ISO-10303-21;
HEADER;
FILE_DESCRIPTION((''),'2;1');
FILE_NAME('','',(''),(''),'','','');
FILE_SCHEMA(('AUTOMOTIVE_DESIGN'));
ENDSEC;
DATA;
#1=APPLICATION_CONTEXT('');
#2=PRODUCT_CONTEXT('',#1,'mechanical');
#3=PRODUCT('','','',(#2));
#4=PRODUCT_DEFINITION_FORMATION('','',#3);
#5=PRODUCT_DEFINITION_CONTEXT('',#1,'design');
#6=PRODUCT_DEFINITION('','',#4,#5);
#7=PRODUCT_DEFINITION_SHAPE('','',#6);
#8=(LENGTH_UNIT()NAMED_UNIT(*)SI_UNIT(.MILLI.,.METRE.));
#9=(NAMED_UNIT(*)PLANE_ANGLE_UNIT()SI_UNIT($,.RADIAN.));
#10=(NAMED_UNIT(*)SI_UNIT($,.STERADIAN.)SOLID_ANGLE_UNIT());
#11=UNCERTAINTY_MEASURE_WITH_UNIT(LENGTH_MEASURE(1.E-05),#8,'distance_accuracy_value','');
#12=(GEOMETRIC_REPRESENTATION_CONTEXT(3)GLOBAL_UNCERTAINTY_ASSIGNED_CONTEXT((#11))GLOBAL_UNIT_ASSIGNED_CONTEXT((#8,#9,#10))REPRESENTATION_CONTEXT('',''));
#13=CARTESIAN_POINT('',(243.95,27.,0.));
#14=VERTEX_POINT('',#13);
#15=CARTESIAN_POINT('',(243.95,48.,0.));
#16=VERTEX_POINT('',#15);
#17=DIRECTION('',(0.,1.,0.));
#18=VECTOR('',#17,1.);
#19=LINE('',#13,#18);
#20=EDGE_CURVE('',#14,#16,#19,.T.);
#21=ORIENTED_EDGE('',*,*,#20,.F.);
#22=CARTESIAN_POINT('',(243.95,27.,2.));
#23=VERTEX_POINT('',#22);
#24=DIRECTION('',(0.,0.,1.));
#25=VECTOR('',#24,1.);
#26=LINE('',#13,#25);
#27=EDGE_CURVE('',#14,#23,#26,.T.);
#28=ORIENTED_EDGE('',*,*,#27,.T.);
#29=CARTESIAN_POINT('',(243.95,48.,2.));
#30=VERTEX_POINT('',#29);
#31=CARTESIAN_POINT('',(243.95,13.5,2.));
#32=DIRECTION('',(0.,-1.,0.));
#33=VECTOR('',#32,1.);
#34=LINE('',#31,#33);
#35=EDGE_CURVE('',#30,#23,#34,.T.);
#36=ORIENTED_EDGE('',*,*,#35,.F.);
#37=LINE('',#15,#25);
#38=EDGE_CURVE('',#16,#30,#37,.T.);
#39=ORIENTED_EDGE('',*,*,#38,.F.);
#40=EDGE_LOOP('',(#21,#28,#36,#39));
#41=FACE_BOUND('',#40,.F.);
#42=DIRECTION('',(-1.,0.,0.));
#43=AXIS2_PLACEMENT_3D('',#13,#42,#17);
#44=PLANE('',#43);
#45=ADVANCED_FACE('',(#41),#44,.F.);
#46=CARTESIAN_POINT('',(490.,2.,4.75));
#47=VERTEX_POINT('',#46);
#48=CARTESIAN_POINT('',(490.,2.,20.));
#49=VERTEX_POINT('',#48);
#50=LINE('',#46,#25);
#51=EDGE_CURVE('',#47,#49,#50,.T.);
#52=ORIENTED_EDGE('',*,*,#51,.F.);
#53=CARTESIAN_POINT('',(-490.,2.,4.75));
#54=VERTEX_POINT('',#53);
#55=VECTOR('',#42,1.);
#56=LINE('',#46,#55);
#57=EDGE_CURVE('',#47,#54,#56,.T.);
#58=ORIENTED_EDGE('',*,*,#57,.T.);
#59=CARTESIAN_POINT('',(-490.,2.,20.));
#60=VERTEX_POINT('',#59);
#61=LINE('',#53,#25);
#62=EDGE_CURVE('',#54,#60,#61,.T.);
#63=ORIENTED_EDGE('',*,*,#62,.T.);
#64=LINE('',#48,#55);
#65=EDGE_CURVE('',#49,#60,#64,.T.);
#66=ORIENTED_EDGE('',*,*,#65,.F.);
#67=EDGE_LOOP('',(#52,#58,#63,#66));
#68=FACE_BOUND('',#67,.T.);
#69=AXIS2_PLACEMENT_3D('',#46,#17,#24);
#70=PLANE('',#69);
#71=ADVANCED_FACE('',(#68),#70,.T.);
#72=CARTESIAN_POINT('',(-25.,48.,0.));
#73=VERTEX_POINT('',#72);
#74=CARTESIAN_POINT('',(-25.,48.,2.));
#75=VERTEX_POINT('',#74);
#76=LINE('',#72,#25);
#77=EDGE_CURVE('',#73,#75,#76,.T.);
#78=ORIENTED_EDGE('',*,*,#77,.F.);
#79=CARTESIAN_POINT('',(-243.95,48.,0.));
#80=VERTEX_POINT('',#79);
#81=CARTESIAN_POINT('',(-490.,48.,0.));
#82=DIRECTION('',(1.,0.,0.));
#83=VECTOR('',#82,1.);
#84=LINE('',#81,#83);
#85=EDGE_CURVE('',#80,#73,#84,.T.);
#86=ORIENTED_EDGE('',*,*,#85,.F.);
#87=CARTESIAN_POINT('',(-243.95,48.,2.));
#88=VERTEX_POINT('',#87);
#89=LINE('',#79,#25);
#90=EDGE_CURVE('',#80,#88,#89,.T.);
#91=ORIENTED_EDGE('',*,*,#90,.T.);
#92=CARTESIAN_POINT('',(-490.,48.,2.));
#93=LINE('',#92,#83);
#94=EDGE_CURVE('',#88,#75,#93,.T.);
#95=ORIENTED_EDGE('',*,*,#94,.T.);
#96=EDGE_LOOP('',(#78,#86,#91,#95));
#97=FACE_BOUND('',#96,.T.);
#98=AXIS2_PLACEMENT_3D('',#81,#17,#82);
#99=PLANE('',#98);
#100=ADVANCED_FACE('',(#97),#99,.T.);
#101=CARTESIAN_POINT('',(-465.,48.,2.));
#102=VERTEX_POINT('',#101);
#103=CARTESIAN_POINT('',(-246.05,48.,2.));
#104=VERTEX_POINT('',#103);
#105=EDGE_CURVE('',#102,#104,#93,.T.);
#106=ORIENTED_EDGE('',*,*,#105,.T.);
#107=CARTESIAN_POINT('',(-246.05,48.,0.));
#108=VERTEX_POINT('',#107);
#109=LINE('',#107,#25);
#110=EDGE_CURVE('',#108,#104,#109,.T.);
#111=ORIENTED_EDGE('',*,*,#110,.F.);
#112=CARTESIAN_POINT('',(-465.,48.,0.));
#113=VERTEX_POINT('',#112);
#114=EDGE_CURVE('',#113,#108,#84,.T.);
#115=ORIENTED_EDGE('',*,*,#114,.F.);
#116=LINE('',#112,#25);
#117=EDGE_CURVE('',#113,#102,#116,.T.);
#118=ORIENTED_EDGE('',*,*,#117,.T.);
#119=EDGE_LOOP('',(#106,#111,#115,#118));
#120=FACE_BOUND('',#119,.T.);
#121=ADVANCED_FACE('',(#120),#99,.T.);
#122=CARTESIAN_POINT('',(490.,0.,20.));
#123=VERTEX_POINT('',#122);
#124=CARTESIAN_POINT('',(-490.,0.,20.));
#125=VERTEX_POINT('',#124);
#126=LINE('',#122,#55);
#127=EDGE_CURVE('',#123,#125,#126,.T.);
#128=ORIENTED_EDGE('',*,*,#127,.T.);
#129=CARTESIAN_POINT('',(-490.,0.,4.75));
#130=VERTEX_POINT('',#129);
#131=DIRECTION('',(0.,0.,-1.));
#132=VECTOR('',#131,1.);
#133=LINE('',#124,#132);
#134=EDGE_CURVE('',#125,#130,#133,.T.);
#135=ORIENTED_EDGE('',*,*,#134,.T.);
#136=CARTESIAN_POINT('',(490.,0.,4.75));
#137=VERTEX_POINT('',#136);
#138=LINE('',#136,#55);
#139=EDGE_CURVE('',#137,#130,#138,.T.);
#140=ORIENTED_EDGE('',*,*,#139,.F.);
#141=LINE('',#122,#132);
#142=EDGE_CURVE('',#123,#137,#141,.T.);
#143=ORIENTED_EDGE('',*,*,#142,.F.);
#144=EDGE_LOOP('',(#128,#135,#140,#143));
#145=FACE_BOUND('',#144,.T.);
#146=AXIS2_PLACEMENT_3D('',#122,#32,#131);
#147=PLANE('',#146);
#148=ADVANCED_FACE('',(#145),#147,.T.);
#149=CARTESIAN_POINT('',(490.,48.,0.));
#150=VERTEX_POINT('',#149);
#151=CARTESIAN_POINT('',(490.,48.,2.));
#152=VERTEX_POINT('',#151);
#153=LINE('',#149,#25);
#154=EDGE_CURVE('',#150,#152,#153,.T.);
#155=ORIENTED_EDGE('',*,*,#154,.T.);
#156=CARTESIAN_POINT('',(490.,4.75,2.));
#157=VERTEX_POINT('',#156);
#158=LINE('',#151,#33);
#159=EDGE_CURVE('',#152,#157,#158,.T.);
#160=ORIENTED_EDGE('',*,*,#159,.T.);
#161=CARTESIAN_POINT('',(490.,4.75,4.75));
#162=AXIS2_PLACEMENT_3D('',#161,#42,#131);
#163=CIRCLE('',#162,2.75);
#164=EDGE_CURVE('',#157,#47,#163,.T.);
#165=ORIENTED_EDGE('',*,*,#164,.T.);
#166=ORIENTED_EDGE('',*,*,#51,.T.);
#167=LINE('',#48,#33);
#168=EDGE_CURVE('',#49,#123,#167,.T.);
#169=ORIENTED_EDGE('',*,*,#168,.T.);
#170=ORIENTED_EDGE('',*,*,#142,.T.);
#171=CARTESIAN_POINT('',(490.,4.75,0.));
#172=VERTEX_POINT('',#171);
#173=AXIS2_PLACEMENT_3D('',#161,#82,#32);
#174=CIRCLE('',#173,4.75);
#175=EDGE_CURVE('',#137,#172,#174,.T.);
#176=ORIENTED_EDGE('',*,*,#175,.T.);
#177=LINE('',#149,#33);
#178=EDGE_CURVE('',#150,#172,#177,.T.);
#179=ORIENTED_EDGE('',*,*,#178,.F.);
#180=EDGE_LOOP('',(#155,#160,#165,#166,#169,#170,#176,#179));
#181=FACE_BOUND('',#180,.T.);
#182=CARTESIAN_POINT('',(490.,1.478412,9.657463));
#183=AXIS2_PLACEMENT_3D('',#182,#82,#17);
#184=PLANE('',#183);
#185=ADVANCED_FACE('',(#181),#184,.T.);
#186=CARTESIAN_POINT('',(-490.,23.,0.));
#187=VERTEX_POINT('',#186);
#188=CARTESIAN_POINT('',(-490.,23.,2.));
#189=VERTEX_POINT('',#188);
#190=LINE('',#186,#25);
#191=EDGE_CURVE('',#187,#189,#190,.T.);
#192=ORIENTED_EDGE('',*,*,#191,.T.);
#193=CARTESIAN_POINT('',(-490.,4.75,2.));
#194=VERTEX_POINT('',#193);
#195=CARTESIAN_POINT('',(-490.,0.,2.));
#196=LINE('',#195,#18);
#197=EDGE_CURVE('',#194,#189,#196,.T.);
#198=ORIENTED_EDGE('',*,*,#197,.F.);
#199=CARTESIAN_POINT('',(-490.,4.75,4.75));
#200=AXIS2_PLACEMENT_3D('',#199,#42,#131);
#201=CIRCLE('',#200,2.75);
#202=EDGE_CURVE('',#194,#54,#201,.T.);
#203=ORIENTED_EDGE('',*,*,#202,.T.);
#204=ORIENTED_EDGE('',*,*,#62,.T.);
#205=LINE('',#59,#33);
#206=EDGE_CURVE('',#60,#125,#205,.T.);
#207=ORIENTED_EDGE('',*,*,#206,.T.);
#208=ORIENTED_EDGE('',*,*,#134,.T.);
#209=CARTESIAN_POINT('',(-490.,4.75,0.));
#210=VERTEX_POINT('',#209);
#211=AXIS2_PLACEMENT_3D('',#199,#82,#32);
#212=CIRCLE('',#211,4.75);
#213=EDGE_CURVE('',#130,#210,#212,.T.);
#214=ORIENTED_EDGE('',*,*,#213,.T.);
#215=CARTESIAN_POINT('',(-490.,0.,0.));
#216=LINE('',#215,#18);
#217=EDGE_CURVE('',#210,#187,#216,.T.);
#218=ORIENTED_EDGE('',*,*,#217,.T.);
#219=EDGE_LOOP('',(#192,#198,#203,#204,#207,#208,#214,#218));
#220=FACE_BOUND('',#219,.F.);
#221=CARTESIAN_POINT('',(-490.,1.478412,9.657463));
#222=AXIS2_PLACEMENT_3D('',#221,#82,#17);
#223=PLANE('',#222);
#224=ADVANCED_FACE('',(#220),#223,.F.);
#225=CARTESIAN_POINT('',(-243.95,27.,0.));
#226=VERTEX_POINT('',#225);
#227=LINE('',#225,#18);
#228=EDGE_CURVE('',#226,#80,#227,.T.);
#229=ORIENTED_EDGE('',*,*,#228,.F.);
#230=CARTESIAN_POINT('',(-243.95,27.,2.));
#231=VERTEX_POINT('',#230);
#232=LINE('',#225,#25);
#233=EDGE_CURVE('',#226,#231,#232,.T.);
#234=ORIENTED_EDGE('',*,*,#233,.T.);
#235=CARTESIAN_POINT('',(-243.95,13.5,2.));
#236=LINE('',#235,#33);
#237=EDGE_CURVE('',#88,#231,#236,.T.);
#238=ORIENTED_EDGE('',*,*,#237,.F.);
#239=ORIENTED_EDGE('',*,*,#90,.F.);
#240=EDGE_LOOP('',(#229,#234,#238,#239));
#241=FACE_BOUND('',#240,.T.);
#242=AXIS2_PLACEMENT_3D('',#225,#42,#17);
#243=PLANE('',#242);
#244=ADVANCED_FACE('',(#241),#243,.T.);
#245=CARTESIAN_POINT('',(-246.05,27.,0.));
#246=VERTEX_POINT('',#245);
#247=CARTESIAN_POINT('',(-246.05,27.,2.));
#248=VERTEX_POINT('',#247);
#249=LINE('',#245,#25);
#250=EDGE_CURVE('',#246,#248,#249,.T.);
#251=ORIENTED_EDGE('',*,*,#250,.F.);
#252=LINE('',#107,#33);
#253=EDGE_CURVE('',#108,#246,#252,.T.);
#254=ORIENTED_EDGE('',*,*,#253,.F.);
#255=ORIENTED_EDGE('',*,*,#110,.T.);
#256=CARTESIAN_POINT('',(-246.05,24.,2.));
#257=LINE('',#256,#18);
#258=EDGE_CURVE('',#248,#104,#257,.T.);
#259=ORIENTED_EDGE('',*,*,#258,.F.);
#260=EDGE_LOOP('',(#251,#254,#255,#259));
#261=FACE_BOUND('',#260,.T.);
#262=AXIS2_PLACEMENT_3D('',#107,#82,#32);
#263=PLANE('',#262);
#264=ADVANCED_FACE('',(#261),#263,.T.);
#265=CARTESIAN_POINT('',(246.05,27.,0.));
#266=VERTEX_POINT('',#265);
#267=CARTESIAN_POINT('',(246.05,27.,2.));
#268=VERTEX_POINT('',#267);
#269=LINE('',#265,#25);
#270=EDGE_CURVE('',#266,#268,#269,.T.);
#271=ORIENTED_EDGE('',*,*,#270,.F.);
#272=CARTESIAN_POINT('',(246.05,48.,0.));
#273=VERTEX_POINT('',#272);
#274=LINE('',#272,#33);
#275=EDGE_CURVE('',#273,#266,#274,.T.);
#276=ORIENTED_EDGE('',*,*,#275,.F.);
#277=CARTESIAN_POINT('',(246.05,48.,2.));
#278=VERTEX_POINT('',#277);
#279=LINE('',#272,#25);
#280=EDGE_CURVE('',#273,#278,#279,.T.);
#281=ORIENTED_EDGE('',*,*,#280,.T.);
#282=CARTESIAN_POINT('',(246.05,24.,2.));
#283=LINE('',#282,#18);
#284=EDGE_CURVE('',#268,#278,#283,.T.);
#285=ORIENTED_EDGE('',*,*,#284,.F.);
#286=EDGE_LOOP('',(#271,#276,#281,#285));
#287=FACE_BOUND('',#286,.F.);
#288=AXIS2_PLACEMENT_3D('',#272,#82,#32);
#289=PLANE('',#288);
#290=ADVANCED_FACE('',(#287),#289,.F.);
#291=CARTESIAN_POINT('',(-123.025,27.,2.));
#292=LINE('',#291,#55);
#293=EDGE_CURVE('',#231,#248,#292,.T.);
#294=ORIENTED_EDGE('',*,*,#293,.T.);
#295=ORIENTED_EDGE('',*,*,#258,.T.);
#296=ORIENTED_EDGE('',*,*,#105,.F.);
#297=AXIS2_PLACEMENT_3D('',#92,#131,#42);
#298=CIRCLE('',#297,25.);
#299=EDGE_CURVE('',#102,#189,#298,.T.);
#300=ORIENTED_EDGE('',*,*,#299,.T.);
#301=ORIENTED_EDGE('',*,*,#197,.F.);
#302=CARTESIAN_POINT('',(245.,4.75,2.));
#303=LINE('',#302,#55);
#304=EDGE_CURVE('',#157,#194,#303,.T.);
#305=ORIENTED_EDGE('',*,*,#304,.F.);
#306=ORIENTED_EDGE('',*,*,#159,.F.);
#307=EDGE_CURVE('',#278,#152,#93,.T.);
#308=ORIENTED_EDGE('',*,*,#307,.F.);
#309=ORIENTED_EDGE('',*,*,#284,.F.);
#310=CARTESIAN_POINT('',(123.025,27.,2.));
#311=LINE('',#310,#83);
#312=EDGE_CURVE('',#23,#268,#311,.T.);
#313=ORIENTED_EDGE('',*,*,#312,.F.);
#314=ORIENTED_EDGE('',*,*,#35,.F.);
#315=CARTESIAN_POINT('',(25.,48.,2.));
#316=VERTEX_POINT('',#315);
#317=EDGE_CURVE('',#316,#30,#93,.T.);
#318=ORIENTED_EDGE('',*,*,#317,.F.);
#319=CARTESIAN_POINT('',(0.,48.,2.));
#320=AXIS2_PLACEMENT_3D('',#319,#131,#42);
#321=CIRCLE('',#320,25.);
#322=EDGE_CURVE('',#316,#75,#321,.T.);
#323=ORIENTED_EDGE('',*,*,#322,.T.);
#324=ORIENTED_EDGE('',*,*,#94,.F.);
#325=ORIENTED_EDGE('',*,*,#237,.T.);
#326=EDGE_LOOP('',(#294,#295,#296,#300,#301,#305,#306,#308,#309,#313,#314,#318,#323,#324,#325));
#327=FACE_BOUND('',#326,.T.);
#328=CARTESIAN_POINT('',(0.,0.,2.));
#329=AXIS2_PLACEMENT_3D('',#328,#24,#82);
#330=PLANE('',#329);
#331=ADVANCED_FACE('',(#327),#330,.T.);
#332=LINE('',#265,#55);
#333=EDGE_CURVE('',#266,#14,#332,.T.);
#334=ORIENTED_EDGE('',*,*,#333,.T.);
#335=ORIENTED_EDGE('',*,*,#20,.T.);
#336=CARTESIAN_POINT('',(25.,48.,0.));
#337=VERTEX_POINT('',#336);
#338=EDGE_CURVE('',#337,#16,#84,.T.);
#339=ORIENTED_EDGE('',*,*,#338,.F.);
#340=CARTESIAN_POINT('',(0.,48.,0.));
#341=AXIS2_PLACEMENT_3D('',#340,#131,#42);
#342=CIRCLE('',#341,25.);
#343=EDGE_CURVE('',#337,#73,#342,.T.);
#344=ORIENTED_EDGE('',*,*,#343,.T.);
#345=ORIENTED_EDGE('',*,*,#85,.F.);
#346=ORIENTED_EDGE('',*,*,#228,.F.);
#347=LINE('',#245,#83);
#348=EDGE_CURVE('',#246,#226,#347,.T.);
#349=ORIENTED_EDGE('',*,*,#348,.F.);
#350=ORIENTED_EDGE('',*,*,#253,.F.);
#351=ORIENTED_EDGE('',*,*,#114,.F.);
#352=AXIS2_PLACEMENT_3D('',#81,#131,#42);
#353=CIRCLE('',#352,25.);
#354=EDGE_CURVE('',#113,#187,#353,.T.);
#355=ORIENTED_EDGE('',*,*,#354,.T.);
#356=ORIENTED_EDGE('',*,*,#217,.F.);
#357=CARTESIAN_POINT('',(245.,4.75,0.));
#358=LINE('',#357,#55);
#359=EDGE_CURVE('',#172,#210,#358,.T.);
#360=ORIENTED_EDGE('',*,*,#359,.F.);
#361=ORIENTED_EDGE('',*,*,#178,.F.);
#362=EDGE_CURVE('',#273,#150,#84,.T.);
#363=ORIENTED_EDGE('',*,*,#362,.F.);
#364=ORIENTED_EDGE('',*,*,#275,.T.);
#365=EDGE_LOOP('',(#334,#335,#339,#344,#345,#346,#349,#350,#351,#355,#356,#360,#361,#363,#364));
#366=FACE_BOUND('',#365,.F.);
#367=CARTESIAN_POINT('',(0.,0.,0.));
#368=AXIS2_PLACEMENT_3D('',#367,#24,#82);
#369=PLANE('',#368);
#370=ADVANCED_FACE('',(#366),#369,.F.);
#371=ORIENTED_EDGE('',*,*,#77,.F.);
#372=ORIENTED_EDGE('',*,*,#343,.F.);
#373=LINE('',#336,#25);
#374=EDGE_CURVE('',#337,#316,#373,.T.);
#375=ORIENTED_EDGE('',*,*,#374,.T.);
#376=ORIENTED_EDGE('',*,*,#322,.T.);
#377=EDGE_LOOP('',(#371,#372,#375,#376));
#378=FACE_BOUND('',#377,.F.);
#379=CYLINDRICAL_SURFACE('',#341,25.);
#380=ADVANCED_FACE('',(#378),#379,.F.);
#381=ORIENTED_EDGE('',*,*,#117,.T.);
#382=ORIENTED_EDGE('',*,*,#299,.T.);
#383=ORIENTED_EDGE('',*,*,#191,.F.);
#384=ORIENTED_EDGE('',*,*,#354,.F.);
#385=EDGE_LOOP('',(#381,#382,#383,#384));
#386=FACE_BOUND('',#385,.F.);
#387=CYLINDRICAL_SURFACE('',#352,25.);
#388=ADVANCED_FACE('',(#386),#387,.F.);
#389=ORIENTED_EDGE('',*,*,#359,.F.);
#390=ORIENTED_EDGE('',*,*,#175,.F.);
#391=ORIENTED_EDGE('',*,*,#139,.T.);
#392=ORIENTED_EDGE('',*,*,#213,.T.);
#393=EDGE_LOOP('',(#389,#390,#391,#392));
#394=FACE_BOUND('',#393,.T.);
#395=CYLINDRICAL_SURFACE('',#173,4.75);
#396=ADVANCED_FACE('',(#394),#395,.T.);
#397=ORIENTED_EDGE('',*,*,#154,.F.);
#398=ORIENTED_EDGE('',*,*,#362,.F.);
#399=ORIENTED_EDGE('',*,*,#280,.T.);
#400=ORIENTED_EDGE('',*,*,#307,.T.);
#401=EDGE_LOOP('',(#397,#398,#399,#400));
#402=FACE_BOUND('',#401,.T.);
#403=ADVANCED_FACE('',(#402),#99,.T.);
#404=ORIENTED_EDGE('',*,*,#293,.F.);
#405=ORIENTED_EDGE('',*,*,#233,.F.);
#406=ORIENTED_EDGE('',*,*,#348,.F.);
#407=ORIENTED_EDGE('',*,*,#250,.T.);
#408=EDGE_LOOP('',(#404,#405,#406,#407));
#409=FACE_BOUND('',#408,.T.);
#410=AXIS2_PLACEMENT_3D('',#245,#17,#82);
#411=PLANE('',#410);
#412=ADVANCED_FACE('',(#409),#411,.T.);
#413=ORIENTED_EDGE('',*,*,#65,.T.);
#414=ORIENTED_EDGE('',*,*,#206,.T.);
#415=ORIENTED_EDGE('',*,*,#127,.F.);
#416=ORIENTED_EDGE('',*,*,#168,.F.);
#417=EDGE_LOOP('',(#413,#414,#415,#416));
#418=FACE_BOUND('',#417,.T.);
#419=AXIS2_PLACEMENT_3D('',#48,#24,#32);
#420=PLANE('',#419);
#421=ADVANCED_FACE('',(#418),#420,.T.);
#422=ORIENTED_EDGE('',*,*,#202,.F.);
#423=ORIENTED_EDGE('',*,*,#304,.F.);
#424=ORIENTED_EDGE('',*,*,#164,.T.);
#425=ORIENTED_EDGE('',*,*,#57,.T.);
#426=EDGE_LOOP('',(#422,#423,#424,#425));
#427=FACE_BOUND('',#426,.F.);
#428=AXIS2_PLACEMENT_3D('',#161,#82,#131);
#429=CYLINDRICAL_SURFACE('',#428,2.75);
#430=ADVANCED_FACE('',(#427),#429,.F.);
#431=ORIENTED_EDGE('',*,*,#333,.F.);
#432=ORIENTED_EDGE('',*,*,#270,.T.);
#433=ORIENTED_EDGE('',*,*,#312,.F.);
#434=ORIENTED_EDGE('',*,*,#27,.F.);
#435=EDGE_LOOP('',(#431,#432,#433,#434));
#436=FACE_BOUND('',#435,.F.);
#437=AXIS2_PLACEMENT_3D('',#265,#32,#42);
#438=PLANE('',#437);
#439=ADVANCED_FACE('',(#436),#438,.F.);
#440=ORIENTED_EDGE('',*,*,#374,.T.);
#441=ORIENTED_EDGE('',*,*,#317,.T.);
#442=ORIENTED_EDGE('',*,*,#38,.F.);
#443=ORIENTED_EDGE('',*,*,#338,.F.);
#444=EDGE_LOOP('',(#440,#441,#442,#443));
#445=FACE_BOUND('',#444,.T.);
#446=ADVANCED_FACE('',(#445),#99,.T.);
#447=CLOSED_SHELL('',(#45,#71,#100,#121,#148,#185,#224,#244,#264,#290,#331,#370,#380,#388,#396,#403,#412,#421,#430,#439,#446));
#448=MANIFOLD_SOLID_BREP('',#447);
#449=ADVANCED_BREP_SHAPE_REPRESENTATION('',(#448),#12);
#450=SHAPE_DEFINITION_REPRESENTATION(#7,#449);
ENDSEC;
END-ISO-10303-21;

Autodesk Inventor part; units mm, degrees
ref_plane "YZ Plane" through (0, 0, 0) normal (1, 0, 0) x (0, 1, 0)
ref_plane "XZ Plane" through (0, 0, 0) normal (0, 1, 0) x (-1, 0, 0)
ref_plane "XY Plane" through (0, 0, 0) normal (0, 0, 1) x (1, 0, 0)
sketch "Sketch1" plane through (0, 0, 0) normal (0, 0, 1) x (1, 0, 0)
  line L0 (-490, 48) -> (490, 48)
  line L1 (490, 48) -> (490, 0)
  line L2 (490, 0) -> (-490, 0)
  line L3 (-490, 0) -> (-490, 48)
  point P0 (0, 0)
  point P1 (0, 0)
  dimension "d0" = 980
  dimension "d1" = 48
extrude "Plate1" add sketch "Sketch1" along normal blind 2
sketch "Sketch2" plane through (490, 2, 0) normal (0, -1, 0) x (1, 0, 0)
  line L0 (-980, 0) -> (0, 0)
  line L1 (0, 0) -> (0, 20)
  line L2 (0, 20) -> (-980, 20)
  line L3 (-980, 20) -> (-980, 0)
edge flange "Flange1" height 20 angle 90 thickness 2 bend radius 2.75 thickness toward (0, -1, 0) relief round relief width 2 relief depth 1 edges at (0, 0, 2) wall of the first edge with corners at (-490, 2, 0) (490, 2, 0) (490, 2, 20) (-490, 2, 20)
bend "Bend1"
corner "Corner1"
sketch "Sketch5" plane through (0, 0, 0) normal (0, 0, -1) x (-1, 0, 0)
  line L0 (490, 48) -> (-490, 48) projected
  line L1 (490, 0) -> (-490, 0) projected
  circle A0 centre (0, 48) radius 25
  line L2 (243.95, 48) -> (246.05, 48)
  line L3 (246.05, 48) -> (246.05, 27)
  line L4 (246.05, 27) -> (243.95, 27)
  line L5 (243.95, 27) -> (243.95, 48)
  line L6 (-243.95, 48) -> (-246.05, 48)
  line L7 (-246.05, 48) -> (-246.05, 27)
  line L8 (-246.05, 27) -> (-243.95, 27)
  line L9 (-243.95, 27) -> (-243.95, 48)
  line L10 (0, 48) -> (0, 0) construction
  line L11 (490, 0) -> (490, 48)
  line L12 (-490, 0) -> (-490, 48)
  circle A1 centre (-490, 48) radius 25
  circle A2 centre (490, 48) radius 25
  point P0 (0, 0)
  point P1 (245, 27)
  point P2 (-245, 27)
  point P3 (246.05, 48)
  point P4 (-25, 48)
  point P5 (25, 48)
  point P6 (-246.05, 48)
  point P7 (465, 48)
  point P8 (490, 23)
  point P9 (-490, 23)
  point P10 (-465, 48)
  dimension "d45" = 50
  dimension "d48" = 2.1
  dimension "d49" = 490
  dimension "d51" = 27
  dimension "d52" = 21
extrude "Extrusion1" cut sketch "Sketch5" against normal through all contours L3 L4 L5 L0 | L0 L11 A2 | A0 L0 | L9 L8 L7 L0 picked at (473.5423, 46.1457) picked at (-2.955, 40.2082)
sketch "Sketch9" plane through (0, 0, 2) normal (0, 0, 1) x (1, 0, 0)
  line L0 (480.2878, 24.3045) -> (480.2878, 12.3045) construction
  line L1 (480.2878, 12.3045) -> (280.2878, 12.3045) construction
  line L2 (280.2878, 12.3045) -> (280.2878, 24.3045) construction
  line L3 (280.2878, 24.3045) -> (480.2878, 24.3045) construction
  line L4 (-490, 48) -> (490, 48) projected
  point P0 (0, 0)
  point P1 (1.05, 68)
  point P2 (490, 48)
  point P3 (-490, 48)
  dimension "d40" = 200
  dimension "d41" = 12
mark "Mark2"
equation "\"d2\" = Thickness"
equation "\"d3\" = BendReliefWidth"
equation "\"d4\" = BendReliefDepth"
equation "\"d5\" = MinimumRemnant"
equation "\"d6\" = TransitionRadius"
equation "\"d9\" = BendRadius"
equation "\"d10\" = CornerReliefSize"
equation "\"d11\" = GapSize"
equation "\"d12\" = JacobiRadiusSize"
equation "\"BendReliefWidth\" = Thickness"
equation "\"BendReliefDepth\" = 0.5 * Thickness"
equation "\"CornerReliefSize\" = 4 * Thickness"
equation "\"MinimumRemnant\" = 2 * Thickness"
equation "\"TransitionRadius\" = BendRadius"
equation "\"JacobiRadiusSize\" = BendRadius"
equation "\"GapSize\" = Thickness"
equation "\"Thickness\" = 2"
equation "\"BendRadius\" = 2.75"
properties part number "MSC 325 STRINGER BOARD  ##" material "Stainless Steel"
